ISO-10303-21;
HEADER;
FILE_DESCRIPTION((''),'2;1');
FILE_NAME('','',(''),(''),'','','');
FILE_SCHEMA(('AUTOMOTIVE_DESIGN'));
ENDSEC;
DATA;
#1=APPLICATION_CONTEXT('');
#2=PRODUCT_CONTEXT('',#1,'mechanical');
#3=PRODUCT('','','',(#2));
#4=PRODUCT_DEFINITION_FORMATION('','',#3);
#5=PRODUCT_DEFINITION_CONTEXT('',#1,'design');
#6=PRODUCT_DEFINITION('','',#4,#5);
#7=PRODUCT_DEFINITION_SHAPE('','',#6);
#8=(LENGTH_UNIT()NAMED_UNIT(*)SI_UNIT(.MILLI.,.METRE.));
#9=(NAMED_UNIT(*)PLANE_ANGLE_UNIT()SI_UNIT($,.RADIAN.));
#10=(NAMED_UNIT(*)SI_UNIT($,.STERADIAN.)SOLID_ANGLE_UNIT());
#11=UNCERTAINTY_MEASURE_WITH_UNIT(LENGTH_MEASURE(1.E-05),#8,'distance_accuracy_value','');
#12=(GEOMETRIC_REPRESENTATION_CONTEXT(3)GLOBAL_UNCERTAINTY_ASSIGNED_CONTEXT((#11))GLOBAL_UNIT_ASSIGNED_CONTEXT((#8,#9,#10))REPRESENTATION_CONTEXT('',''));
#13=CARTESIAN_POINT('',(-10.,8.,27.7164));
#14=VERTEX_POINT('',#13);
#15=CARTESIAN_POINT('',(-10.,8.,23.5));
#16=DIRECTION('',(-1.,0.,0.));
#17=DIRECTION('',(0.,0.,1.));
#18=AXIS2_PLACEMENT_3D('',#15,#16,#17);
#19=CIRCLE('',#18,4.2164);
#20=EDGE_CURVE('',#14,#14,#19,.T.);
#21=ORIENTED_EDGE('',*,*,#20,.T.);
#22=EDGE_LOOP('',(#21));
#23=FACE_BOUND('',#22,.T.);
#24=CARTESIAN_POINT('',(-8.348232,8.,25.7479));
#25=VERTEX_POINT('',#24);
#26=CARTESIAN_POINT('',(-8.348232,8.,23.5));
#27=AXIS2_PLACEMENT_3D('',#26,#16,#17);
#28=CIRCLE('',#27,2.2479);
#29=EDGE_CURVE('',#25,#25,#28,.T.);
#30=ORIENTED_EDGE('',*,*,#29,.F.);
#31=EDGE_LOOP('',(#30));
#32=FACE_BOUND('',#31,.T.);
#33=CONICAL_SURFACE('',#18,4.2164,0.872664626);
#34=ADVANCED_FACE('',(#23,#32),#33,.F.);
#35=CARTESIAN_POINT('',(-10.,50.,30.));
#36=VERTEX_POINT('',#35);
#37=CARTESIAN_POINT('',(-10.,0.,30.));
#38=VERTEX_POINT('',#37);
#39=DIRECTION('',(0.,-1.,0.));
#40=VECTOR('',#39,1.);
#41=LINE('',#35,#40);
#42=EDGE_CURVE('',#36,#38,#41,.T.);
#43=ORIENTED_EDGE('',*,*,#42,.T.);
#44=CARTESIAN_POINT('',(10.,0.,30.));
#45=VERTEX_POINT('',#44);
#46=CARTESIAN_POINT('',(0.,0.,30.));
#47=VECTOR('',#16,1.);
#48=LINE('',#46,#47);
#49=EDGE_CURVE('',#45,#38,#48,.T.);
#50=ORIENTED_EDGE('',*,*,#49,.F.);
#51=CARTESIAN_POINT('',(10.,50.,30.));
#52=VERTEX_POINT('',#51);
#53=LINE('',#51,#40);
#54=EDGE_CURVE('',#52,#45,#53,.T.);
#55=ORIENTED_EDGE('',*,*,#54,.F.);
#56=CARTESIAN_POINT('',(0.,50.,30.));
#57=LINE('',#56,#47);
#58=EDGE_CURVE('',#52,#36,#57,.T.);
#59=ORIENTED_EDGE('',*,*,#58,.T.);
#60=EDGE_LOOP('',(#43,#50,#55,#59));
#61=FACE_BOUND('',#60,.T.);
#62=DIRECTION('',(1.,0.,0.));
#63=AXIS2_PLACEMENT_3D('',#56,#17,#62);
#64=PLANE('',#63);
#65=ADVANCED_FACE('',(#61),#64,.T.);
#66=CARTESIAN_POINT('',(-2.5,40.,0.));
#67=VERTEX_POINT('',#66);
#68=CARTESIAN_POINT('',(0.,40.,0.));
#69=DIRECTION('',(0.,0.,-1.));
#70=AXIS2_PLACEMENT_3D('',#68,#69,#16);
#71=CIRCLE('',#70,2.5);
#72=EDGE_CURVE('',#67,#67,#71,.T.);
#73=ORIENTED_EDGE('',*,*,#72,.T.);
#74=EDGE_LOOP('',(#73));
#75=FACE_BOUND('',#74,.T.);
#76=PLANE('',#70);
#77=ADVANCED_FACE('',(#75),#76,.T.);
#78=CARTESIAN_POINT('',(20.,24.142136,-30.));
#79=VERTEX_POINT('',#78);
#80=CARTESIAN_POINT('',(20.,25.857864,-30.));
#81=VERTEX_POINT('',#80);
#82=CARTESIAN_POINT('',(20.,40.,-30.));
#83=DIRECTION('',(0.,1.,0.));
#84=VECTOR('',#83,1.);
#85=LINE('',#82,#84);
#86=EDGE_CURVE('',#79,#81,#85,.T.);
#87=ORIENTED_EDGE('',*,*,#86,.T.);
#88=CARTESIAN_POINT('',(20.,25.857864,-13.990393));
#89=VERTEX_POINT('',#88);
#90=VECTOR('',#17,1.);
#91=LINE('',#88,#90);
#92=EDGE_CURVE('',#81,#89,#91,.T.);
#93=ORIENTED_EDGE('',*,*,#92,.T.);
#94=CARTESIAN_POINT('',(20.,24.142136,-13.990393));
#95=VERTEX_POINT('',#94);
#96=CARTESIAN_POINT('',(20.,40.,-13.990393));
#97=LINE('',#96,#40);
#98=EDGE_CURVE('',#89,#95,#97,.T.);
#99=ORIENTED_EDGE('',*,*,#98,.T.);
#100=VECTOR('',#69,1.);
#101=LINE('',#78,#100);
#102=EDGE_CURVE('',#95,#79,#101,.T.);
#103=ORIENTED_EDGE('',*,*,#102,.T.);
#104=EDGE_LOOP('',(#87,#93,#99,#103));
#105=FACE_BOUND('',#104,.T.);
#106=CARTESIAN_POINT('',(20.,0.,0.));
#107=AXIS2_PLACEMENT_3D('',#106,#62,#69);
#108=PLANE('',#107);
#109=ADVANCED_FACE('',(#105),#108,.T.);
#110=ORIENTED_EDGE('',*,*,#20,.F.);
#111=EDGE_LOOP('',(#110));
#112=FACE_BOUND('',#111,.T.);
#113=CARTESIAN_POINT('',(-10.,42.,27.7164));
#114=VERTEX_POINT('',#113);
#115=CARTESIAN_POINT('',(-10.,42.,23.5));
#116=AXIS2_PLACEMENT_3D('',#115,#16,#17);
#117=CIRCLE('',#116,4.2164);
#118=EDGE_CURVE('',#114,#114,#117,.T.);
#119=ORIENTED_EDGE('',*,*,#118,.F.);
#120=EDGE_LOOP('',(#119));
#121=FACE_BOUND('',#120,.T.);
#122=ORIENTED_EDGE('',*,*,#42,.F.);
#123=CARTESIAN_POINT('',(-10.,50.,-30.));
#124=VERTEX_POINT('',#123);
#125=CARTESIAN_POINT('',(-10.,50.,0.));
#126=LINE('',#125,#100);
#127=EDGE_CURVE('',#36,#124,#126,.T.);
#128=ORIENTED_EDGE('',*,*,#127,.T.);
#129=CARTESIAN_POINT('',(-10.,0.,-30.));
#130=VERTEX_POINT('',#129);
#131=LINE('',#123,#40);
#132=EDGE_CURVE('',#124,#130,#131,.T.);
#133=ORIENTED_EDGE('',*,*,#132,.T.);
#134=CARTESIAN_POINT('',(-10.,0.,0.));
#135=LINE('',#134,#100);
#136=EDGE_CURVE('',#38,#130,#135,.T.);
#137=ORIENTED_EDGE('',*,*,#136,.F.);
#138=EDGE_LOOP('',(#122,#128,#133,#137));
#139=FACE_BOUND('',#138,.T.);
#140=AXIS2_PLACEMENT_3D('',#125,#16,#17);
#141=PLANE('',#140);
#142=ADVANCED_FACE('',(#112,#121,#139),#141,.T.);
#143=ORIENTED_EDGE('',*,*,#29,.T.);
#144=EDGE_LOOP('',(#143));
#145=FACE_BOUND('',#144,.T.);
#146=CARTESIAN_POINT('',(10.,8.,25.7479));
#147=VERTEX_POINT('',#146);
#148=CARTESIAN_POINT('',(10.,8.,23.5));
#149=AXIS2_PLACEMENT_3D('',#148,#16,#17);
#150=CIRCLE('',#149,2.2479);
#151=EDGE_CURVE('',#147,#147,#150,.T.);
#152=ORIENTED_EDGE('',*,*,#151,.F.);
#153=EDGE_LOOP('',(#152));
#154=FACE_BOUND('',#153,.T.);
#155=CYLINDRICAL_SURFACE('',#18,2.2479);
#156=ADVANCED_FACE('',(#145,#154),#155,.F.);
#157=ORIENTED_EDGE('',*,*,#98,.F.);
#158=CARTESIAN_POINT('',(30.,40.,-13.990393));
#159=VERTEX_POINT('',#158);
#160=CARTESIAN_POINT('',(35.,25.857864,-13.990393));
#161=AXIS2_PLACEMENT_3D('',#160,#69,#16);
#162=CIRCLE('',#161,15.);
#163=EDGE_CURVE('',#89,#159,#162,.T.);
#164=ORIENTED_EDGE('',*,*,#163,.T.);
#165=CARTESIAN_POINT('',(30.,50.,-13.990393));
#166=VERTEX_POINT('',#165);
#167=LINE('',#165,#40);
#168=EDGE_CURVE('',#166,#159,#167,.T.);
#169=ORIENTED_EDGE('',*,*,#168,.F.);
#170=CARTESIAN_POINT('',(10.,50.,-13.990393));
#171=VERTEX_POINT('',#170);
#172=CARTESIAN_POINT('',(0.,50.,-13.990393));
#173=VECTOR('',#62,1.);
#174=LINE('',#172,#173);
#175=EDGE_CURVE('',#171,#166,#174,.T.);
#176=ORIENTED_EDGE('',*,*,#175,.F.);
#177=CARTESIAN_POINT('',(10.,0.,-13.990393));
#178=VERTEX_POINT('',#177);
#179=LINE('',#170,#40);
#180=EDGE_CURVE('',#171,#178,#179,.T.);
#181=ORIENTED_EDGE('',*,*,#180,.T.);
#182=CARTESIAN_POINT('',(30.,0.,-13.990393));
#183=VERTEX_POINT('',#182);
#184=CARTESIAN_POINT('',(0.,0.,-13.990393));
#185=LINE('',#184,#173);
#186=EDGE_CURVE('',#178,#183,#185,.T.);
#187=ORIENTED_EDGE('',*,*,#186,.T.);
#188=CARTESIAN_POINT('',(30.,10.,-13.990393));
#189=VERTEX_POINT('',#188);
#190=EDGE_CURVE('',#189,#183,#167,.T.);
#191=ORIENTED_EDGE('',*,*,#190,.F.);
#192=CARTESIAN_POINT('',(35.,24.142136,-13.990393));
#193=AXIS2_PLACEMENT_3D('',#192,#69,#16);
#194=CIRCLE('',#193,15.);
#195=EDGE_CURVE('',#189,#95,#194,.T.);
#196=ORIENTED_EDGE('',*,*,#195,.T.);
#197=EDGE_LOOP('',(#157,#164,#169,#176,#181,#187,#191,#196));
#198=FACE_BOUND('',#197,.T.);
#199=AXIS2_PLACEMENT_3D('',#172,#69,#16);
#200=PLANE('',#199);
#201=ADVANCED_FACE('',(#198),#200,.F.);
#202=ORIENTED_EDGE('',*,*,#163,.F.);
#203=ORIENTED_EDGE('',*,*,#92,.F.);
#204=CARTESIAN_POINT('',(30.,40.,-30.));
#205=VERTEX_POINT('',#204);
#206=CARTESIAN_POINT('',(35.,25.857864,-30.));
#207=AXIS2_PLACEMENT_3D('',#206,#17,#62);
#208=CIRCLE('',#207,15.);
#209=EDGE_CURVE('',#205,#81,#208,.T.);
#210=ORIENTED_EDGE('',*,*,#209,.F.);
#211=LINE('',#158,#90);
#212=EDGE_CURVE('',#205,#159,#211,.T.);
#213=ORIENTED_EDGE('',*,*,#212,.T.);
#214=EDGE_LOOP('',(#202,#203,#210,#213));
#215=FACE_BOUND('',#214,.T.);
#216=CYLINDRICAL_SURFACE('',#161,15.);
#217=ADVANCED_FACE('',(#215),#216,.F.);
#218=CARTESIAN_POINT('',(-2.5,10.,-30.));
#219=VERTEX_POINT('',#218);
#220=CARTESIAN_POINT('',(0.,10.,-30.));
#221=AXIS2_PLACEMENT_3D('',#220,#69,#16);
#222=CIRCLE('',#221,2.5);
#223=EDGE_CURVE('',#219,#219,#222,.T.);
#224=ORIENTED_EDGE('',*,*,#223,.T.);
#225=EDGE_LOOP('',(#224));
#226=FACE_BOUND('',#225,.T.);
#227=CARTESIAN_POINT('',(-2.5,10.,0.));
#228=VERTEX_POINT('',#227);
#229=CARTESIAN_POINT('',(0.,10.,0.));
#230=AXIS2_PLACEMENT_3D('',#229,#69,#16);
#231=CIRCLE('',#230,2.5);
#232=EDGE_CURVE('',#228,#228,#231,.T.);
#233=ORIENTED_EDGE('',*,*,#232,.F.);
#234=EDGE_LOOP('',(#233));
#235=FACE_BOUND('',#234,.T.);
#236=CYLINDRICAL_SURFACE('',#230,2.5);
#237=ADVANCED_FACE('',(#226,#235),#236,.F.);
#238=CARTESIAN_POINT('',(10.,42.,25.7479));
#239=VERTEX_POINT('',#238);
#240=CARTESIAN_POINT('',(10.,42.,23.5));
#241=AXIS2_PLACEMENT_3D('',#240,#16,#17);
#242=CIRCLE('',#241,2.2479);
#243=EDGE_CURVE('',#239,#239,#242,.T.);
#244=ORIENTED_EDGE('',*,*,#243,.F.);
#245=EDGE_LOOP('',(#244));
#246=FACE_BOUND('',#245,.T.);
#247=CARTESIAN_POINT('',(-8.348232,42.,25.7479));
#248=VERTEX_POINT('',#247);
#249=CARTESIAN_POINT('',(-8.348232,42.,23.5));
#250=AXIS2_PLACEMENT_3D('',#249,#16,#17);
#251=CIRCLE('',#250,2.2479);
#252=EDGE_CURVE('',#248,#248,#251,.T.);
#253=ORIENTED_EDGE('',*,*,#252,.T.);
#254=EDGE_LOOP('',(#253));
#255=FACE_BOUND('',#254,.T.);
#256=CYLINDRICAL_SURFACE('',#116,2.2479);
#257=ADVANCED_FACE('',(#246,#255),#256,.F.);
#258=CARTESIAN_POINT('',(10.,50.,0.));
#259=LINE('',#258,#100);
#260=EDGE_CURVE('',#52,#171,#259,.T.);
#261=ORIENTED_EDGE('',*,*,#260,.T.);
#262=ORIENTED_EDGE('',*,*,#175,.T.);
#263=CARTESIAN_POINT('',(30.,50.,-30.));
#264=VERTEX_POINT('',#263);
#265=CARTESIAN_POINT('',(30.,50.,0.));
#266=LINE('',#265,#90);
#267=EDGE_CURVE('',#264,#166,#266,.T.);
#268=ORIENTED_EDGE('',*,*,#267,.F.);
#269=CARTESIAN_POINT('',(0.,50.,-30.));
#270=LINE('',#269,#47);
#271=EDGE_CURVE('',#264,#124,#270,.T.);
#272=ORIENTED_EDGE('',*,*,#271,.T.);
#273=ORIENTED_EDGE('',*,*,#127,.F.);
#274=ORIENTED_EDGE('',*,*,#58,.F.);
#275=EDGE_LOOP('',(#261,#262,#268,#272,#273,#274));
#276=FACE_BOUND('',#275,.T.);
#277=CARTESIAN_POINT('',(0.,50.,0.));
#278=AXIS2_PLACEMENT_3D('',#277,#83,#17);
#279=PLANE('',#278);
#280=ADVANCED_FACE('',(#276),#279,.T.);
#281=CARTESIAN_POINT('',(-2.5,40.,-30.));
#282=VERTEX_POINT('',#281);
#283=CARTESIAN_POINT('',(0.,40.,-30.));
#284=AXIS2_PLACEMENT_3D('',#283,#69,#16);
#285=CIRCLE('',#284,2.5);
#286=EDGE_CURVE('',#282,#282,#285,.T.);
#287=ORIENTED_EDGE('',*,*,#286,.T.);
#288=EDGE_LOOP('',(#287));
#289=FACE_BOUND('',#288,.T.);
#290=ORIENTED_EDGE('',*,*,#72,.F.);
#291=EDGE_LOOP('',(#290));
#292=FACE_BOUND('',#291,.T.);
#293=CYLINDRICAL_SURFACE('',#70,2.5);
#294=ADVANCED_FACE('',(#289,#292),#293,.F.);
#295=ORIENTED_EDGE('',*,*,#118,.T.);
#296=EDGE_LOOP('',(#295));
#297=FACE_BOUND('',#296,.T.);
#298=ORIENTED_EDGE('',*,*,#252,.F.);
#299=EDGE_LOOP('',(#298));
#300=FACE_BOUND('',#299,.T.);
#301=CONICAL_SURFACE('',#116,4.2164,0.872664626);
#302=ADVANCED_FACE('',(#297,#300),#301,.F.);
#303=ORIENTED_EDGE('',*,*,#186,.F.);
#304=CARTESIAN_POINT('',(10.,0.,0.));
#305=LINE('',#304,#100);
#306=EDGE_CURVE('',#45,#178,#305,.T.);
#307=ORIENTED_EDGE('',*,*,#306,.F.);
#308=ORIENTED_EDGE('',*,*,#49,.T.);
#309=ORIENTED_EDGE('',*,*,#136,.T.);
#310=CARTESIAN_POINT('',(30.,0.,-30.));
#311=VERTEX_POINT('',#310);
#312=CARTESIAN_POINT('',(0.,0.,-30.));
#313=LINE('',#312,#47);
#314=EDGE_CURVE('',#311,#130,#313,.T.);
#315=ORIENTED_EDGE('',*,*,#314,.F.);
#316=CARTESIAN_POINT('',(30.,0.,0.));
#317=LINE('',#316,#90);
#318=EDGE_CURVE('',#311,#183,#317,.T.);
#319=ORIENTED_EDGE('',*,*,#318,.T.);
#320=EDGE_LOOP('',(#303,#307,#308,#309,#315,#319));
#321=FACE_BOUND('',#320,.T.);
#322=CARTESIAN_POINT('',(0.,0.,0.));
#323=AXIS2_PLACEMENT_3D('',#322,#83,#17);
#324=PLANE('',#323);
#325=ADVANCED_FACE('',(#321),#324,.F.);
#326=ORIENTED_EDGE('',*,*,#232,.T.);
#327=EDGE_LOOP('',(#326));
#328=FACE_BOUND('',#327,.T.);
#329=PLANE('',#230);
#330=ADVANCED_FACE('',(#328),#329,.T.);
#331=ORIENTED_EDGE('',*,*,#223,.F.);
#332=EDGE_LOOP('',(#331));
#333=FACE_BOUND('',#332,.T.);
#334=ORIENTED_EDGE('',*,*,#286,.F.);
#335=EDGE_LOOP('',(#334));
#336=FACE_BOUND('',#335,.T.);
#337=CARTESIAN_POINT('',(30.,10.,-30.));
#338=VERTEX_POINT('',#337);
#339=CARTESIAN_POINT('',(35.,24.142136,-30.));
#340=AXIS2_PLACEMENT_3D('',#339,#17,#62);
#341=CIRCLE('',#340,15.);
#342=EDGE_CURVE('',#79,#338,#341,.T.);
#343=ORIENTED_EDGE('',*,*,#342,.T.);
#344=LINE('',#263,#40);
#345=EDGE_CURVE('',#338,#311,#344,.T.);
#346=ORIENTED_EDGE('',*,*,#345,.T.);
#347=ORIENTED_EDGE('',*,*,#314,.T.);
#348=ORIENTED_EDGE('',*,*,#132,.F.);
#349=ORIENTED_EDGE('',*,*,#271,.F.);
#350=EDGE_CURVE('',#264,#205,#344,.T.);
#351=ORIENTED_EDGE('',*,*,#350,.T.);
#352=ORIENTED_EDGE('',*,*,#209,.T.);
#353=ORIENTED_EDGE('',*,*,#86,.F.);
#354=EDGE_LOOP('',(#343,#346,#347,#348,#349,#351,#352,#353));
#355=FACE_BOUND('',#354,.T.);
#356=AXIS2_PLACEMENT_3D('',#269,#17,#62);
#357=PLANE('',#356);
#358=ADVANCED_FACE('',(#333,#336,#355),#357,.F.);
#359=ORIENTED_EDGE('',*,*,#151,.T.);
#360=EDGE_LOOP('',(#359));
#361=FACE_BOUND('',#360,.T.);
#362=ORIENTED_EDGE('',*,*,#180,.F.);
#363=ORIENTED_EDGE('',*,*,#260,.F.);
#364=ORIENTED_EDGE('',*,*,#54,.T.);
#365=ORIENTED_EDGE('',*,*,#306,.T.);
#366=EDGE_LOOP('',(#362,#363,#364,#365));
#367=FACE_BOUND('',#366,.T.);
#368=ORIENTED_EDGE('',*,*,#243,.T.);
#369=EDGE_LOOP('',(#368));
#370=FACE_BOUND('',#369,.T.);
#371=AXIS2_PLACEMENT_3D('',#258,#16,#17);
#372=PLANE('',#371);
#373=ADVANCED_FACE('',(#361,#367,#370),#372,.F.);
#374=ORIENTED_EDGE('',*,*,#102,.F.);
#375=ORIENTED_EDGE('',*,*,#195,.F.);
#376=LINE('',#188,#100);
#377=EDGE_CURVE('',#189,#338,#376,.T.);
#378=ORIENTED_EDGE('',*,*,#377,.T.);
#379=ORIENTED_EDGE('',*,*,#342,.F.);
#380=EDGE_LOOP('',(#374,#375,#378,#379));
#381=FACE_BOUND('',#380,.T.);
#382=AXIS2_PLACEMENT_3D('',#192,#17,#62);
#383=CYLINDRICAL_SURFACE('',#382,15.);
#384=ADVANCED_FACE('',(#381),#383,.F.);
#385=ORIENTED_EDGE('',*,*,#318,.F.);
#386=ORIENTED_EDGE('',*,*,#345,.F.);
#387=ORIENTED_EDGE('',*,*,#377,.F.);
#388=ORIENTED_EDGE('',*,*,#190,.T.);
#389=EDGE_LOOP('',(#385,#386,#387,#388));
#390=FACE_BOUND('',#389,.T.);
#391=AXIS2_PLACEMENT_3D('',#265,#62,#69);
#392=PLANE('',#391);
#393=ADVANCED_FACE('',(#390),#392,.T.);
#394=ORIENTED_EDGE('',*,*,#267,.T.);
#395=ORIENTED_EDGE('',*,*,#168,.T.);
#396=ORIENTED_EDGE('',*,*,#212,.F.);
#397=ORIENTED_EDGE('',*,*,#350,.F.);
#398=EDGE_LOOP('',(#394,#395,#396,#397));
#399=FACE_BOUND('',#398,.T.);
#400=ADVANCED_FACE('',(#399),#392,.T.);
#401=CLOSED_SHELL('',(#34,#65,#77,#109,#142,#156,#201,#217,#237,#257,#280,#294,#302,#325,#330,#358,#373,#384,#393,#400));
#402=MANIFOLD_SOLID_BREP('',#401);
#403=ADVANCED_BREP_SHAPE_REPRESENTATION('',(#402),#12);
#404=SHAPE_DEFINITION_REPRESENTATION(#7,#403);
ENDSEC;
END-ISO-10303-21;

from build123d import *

# Parameters (mm, degrees)
SKETCH3_W                                         = 20
SKETCH3_H                                         = 60
SKETCH3_H_2                                       = 16.009607205
BOSS_EXTRUDE1_DEPTH                               = 50
SKETCH4_W                                         = 16.009607205
SKETCH4_H                                         = 30
CUT_EXTRUDE1_DEPTH                                = 10
FILLET4_R                                         = 15
CSK_FOR_8_FLAT_HEAD_MACHINE_SCREW_100_D           = 4.4958
CSK_FOR_8_FLAT_HEAD_MACHINE_SCREW_100_CSINK_D     = 8.4328
CSK_FOR_8_FLAT_HEAD_MACHINE_SCREW_100_CSINK_ANGLE = 100
SKETCH7_R                                         = 2.5
CUT_EXTRUDE2_DEPTH                                = 30


with BuildPart() as part:
    # Sketch3 → Boss-Extrude1 (new body)
    with BuildSketch(Plane(origin=(0, 0, 0), x_dir=(1, 0, 0), z_dir=(0, 1, 0))):
        Rectangle(SKETCH3_W, SKETCH3_H)
        with Locations((20, 21.995196398)):
            Rectangle(SKETCH3_W, SKETCH3_H_2)
    extrude(amount=BOSS_EXTRUDE1_DEPTH)

    # Sketch4 → Cut-Extrude1 (cut)
    with BuildSketch(Plane(origin=(30, 0, 0), x_dir=(0, 0, -1), z_dir=(1, 0, 0))):
        with Locations((21.995196398, 25)):
            Rectangle(SKETCH4_W, SKETCH4_H)
    extrude(amount=-CUT_EXTRUDE1_DEPTH, mode=Mode.SUBTRACT)

    # Fillet4
    # the kernel refuses this fillet: 15 mm, written as the material it adds along each edge
    with BuildSketch(Plane(origin=(20, 10, -30), x_dir=(1, 0, 0), z_dir=(0, 0, 1))) as fillet4_piece_1:
        with BuildLine():
            CenterArc((15, 14.142135624), FILLET4_R, 180, 70.528779366)
            Line((0, 14.142135624), (-0.3, 14.142135624))
            Line((-0.3, 14.142135624), (-0.3, 0))
            Line((-0.3, 0), (0, -0.3))
            ThreePointArc((0, -0.3), (5, -0.3), (9.9, -0.282842712))
            Line((9.9, -0.282842712), (10, 0))
        make_face()
    extrude(amount=16.009607205)
    with BuildSketch(Plane(origin=(20, 40, -13.990392795), x_dir=(0, -1, 0), z_dir=(0, 0, -1))) as fillet4_piece_2:
        with BuildLine():
            CenterArc((14.142135624, -15), FILLET4_R, 90, 70.528779366)
            Line((0, -10), (-0.282842712, -9.9))
            ThreePointArc((-0.282842712, -9.9), (-0.3, -5), (-0.3, 0))
            Line((-0.3, 0), (0, 0.3))
            Line((0, 0.3), (14.142135624, 0.3))
            Line((14.142135624, 0.3), (14.142135624, 0))
        make_face()
    extrude(amount=16.009607205)

    # CSK for #8 Flat Head Machine Screw (100)1 (through all)
    with Locations(Plane.ZY.offset(10)):
        with Locations((23.5, 8), (23.5, 42)):
            CounterSinkHole(CSK_FOR_8_FLAT_HEAD_MACHINE_SCREW_100_D / 2, CSK_FOR_8_FLAT_HEAD_MACHINE_SCREW_100_CSINK_D / 2, counter_sink_angle=CSK_FOR_8_FLAT_HEAD_MACHINE_SCREW_100_CSINK_ANGLE)

    # Sketch7 → Cut-Extrude2 (cut)
    with BuildSketch(Plane(origin=(0, 0, -30), x_dir=(-1, 0, 0), z_dir=(0, 0, -1))):
        with Locations((0, 10)):
            Circle(SKETCH7_R)
        with Locations((0, 40)):
            Circle(SKETCH7_R)
    extrude(amount=-CUT_EXTRUDE2_DEPTH, mode=Mode.SUBTRACT)


solid = part.part
